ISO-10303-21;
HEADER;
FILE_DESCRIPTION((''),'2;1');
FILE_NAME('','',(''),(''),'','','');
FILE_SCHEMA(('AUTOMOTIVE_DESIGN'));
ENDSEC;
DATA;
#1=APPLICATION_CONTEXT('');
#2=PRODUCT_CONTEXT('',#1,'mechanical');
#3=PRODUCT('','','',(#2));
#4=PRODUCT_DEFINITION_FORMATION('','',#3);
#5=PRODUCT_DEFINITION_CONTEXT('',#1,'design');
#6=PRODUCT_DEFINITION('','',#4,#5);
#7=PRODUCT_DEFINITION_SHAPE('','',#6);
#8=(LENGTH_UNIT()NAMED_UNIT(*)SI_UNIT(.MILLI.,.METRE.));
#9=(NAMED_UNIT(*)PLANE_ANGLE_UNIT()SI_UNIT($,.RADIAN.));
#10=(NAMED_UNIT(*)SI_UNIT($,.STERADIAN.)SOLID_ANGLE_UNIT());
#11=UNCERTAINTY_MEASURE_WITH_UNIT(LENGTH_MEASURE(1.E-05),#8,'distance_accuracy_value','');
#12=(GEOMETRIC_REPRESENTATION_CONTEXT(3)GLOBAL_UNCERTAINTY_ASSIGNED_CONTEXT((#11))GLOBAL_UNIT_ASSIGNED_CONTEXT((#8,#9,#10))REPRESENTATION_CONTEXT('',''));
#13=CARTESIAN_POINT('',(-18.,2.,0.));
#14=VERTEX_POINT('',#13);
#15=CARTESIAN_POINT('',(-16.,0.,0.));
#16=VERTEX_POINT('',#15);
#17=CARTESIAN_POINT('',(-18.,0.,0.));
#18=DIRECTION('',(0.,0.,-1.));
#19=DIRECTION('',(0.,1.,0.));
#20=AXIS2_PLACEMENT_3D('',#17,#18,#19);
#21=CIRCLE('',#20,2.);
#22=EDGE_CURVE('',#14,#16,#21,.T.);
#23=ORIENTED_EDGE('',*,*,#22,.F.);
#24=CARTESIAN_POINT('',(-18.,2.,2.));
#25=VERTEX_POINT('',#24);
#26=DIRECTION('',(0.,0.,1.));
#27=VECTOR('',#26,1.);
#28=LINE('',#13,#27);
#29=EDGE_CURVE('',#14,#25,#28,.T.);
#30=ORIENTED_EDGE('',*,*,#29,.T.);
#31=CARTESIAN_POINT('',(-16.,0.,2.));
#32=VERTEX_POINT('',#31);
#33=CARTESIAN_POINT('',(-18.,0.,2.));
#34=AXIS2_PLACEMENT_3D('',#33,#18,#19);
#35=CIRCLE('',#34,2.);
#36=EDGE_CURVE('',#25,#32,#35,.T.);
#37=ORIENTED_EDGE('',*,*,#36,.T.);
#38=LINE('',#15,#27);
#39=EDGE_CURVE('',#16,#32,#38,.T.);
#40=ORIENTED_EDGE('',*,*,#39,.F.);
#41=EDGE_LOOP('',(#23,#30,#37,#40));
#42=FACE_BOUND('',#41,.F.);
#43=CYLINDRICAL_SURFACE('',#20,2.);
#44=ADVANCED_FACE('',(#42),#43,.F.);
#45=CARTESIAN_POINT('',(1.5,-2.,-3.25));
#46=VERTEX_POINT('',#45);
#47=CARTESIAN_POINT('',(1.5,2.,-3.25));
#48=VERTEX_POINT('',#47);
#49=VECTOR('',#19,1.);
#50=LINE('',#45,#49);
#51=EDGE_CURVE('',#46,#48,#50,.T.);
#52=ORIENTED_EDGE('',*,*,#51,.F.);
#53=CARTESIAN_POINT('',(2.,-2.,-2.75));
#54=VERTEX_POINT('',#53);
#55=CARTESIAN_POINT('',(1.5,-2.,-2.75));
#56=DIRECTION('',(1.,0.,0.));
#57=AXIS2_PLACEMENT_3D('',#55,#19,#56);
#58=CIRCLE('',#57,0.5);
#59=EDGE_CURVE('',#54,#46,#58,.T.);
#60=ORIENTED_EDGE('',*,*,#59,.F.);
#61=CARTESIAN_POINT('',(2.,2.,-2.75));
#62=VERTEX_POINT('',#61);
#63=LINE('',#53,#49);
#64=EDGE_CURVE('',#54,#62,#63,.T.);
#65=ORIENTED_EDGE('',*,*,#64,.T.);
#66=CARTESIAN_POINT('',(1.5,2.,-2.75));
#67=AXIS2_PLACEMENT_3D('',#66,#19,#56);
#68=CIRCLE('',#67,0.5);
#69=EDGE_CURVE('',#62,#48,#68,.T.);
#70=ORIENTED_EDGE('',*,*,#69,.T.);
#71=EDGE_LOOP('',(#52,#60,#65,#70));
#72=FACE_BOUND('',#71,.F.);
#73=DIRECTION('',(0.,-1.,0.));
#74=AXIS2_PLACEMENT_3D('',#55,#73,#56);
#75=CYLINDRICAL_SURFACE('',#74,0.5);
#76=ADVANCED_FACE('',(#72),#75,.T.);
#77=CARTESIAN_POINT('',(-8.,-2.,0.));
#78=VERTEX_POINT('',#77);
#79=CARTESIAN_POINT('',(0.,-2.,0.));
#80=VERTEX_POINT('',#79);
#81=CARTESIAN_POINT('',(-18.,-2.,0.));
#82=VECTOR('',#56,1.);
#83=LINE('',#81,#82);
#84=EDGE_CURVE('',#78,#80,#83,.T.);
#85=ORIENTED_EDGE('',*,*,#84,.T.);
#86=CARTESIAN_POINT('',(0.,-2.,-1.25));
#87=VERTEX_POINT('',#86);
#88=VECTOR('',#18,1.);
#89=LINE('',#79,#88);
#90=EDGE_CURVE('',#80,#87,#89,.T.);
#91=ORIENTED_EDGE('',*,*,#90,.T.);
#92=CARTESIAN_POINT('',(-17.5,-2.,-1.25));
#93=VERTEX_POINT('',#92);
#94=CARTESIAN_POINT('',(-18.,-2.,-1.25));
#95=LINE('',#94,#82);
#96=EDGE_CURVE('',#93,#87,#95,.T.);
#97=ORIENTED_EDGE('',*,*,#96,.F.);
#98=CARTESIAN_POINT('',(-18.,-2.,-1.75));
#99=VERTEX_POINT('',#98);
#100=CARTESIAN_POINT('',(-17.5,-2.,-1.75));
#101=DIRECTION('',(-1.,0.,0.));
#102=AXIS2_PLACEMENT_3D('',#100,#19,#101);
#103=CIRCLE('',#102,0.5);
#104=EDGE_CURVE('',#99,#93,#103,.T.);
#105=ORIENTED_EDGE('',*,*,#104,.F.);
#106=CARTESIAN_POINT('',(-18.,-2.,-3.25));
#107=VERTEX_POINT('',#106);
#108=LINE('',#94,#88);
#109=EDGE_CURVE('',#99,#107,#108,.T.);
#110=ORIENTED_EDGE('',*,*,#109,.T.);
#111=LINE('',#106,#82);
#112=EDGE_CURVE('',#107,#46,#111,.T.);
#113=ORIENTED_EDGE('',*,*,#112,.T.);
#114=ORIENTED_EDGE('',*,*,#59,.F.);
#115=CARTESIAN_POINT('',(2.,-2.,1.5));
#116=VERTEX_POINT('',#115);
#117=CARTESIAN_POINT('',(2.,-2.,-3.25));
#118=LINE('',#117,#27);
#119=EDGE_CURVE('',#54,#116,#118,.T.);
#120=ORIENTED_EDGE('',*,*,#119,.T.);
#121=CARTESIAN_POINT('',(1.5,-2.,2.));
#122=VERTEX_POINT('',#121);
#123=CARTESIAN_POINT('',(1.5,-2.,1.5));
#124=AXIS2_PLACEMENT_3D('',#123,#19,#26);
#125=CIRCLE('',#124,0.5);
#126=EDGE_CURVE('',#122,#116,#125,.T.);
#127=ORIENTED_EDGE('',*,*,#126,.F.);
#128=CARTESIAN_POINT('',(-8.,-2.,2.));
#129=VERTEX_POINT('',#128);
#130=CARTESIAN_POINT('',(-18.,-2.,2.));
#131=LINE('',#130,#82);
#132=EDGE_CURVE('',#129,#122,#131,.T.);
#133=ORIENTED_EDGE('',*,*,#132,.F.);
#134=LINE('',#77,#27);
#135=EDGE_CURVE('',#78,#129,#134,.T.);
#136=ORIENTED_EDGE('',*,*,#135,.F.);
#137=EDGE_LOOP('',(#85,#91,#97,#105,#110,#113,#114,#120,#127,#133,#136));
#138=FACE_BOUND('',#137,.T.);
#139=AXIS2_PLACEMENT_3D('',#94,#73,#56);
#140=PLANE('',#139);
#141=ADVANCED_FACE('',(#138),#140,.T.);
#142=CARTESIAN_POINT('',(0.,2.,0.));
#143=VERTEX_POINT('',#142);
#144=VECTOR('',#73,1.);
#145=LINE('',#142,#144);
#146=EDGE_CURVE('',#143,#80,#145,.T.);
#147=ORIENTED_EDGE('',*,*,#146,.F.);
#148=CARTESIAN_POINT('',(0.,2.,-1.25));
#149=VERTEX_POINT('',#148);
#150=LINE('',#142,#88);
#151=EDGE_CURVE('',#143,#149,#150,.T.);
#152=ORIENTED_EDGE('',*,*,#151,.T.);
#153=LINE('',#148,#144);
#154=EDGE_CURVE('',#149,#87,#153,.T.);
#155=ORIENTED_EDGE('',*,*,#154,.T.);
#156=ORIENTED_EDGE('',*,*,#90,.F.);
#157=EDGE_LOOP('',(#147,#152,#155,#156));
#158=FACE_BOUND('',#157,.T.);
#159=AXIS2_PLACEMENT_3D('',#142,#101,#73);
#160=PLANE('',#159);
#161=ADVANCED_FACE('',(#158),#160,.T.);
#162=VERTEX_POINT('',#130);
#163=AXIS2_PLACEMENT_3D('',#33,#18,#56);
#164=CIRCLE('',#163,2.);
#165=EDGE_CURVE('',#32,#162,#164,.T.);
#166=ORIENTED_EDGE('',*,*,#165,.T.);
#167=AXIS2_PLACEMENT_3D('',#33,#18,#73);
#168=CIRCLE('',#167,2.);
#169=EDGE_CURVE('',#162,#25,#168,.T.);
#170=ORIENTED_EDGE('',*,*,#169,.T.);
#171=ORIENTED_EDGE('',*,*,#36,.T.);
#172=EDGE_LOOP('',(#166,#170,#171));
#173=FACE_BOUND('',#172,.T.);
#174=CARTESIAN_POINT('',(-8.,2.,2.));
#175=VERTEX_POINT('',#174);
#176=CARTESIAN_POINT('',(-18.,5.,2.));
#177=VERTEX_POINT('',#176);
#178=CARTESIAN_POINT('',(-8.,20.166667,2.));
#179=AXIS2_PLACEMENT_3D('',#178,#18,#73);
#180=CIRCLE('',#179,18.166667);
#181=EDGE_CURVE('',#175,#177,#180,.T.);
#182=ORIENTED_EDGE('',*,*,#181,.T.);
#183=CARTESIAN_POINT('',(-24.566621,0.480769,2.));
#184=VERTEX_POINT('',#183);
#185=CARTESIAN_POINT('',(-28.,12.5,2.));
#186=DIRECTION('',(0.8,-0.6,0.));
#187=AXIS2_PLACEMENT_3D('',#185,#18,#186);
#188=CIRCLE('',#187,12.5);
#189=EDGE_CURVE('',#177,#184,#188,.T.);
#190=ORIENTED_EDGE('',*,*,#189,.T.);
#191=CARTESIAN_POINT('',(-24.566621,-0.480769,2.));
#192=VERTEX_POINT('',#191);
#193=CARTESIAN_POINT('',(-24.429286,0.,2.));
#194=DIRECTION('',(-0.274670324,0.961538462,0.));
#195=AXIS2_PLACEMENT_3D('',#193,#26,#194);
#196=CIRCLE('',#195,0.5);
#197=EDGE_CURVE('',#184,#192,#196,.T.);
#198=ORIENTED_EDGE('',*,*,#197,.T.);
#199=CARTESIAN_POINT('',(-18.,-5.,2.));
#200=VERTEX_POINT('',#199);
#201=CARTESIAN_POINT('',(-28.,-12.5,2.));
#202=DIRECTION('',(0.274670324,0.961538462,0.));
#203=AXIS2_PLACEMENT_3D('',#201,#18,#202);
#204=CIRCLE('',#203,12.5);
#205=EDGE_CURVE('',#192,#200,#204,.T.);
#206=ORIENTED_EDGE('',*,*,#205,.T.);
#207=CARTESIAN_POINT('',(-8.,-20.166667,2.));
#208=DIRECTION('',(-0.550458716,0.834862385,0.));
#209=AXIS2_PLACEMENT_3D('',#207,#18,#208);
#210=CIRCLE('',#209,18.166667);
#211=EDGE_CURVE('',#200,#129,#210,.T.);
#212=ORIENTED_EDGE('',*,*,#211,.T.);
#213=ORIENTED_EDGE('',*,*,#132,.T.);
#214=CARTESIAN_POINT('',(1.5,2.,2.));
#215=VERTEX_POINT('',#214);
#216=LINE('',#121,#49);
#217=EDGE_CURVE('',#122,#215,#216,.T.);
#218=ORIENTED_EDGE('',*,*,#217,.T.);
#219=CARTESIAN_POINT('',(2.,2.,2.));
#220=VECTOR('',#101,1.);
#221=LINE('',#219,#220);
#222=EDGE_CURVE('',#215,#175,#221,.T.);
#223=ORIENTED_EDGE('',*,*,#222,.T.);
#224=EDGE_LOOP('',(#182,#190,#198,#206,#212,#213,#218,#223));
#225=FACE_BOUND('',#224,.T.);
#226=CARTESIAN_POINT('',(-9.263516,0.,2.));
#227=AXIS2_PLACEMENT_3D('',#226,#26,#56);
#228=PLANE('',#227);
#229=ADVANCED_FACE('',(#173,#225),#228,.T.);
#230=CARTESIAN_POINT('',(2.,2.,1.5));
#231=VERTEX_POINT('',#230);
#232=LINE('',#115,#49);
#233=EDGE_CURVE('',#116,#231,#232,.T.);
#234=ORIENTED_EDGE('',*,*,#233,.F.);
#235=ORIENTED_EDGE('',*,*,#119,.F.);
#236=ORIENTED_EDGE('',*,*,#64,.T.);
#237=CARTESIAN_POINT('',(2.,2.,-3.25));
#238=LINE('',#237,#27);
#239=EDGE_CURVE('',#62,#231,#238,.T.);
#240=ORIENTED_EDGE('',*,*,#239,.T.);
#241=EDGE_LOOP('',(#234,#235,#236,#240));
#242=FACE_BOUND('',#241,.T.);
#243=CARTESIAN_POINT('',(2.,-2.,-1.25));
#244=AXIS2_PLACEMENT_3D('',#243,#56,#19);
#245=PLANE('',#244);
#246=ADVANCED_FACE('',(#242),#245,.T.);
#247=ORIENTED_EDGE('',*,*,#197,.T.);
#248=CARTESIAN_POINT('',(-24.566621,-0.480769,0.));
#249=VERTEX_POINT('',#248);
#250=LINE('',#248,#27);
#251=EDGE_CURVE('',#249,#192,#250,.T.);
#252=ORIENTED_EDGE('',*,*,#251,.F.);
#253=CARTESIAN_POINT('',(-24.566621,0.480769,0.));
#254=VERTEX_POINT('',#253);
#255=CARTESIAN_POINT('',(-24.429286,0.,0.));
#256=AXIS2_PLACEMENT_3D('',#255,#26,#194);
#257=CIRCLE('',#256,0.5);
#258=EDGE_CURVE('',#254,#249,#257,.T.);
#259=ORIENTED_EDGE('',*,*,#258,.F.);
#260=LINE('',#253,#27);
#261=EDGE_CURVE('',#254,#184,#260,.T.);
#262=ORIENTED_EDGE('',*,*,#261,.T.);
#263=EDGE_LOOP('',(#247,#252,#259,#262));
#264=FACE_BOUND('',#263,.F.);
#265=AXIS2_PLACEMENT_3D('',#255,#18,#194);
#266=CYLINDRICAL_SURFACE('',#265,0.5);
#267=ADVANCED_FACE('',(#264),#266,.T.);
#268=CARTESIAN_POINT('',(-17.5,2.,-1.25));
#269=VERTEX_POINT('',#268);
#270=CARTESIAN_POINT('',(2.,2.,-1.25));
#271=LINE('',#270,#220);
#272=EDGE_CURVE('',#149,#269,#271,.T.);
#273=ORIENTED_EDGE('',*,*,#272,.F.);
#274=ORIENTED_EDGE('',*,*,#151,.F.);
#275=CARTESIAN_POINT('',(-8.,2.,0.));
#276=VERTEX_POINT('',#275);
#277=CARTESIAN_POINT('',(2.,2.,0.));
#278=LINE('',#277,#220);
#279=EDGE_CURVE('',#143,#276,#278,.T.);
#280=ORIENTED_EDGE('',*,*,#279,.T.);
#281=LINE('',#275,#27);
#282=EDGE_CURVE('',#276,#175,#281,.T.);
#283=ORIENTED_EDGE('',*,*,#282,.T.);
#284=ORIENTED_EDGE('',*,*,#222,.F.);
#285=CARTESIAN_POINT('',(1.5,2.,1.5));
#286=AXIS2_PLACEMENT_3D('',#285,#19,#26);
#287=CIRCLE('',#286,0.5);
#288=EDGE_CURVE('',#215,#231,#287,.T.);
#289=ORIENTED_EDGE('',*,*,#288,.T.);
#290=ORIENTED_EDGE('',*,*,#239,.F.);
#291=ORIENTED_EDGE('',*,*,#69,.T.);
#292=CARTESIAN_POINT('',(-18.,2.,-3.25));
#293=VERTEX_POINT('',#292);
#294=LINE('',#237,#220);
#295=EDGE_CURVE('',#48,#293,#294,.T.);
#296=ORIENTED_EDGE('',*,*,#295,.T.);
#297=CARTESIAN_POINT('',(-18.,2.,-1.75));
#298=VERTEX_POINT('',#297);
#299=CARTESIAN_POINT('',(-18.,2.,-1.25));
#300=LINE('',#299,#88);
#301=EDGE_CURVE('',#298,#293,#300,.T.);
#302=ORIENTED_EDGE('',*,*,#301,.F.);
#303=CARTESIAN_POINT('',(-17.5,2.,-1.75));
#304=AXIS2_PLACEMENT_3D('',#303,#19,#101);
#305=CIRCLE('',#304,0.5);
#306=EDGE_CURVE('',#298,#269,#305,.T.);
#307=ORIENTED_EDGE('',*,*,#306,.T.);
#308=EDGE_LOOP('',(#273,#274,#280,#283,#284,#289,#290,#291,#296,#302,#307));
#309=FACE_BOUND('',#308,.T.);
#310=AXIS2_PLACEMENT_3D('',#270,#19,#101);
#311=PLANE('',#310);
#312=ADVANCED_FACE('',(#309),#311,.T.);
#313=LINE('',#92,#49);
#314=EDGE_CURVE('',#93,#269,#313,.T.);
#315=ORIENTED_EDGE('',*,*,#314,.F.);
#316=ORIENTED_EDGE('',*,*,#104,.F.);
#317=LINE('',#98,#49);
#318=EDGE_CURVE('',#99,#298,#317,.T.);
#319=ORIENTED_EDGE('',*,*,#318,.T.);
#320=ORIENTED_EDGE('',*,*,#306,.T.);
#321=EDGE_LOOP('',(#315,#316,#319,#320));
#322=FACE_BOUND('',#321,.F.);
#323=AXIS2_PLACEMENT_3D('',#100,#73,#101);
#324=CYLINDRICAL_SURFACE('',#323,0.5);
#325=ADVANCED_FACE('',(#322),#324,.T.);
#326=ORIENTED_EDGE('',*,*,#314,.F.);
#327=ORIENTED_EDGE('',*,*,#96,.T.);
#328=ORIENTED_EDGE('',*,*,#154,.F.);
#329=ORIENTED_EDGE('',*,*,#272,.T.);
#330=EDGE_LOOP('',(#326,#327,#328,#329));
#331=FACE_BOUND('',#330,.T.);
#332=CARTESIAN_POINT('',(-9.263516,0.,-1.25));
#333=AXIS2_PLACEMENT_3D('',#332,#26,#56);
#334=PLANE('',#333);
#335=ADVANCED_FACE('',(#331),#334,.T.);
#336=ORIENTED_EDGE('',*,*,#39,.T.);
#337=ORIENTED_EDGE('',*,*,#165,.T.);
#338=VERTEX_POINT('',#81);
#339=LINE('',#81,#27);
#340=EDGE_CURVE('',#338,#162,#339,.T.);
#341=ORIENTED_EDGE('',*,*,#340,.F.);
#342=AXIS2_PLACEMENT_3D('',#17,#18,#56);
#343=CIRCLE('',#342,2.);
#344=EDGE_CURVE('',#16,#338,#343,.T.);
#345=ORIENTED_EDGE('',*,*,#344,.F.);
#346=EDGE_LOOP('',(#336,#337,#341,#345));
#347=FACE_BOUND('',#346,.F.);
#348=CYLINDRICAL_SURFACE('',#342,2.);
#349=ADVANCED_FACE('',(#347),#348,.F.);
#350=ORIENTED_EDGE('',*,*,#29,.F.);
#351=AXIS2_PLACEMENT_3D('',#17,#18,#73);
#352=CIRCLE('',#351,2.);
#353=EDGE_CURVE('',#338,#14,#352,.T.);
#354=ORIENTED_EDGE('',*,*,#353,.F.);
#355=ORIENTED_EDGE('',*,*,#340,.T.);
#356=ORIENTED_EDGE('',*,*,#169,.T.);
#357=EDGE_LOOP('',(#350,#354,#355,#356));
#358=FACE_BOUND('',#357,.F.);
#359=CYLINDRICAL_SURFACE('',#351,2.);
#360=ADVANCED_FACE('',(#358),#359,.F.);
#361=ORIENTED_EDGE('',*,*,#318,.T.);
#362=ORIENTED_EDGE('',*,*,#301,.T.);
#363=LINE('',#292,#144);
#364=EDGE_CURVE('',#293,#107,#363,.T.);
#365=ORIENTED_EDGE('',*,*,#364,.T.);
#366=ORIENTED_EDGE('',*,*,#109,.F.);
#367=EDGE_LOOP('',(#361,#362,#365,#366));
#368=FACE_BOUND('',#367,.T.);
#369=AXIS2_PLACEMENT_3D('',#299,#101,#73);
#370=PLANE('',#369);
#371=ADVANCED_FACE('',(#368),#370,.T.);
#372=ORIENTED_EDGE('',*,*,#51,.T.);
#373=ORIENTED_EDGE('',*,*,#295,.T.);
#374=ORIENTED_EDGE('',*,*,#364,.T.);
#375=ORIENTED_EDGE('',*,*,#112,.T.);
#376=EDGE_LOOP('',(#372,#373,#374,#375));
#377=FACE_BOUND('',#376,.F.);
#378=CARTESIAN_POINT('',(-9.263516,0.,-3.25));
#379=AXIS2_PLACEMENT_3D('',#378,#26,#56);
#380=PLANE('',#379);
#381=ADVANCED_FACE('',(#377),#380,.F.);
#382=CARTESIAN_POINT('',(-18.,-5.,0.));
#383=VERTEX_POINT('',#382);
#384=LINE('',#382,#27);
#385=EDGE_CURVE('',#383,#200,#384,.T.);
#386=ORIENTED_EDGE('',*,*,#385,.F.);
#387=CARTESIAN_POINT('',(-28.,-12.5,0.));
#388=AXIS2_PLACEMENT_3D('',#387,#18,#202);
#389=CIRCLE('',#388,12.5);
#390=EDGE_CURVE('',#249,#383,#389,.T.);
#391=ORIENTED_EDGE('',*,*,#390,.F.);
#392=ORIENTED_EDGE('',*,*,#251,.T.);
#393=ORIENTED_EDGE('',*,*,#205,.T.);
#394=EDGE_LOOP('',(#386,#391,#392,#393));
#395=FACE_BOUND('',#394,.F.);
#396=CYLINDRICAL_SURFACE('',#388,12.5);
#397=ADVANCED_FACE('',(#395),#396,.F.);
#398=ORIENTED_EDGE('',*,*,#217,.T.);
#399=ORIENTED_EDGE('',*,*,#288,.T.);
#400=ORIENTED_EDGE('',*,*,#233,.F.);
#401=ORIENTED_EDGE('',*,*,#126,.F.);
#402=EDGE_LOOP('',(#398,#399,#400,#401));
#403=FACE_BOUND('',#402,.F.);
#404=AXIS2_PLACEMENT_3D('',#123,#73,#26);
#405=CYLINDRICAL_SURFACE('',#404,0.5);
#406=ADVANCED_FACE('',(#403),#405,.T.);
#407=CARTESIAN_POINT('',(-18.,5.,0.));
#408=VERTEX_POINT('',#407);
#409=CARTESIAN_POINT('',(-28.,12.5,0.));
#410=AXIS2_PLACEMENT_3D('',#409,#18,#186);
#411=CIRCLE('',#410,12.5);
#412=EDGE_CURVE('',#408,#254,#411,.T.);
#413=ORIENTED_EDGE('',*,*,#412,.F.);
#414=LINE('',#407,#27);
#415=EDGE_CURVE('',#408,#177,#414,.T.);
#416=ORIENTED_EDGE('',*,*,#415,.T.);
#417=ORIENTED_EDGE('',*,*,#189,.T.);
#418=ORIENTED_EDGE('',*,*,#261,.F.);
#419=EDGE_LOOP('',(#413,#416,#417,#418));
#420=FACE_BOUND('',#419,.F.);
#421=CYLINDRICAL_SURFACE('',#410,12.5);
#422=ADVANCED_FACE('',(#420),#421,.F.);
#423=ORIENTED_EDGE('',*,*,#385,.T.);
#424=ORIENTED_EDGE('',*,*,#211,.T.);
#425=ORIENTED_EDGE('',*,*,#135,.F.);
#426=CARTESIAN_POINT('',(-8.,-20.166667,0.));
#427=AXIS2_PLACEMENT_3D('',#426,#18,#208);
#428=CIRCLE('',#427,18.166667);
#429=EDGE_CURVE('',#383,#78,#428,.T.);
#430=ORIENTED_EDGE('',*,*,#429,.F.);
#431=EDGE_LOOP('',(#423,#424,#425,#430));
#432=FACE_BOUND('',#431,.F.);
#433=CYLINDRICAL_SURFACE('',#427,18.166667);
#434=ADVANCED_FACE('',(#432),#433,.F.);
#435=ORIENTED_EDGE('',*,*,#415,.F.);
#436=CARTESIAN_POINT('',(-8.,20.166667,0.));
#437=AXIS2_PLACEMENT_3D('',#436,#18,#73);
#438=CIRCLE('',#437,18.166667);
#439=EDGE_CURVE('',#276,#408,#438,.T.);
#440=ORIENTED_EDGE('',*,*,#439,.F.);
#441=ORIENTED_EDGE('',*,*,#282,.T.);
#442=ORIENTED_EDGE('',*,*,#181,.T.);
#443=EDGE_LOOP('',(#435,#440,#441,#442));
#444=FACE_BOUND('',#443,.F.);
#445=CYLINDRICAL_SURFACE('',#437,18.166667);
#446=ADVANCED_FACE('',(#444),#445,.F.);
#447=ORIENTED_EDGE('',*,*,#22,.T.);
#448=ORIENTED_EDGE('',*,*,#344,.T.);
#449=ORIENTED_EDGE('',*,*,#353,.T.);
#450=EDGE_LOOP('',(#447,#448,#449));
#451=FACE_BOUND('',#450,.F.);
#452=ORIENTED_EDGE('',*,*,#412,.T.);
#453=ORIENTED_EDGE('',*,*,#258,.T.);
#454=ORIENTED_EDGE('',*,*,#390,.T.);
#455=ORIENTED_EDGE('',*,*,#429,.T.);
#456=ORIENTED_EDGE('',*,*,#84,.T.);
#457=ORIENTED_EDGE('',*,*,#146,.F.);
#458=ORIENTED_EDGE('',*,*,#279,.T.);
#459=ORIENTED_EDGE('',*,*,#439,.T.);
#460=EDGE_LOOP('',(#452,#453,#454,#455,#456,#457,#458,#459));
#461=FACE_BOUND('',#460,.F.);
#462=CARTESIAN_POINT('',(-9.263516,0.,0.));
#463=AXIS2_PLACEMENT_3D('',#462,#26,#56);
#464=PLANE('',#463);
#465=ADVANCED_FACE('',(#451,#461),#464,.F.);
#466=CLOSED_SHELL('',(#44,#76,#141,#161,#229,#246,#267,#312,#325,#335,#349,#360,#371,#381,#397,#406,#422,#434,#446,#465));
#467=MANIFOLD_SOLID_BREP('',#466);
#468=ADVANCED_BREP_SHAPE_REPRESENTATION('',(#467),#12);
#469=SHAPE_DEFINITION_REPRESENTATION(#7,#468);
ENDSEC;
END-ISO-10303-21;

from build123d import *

# Parameters (mm, degrees)
F4_DEPTH = 2
F5_DEPTH = 1.25
F6_START = -1.25
F6_DEPTH = 2
F8_DEPTH = 4


# Not quite as in the source:
# - a feature names something its author has since deleted; it is built from what else it names


with BuildPart() as f4:
    # F3 (on Top) → F4 (new body)
    with BuildSketch(Plane.XY):
        with BuildLine():
            Line((0, -2), (0, 0))
            Line((0, 0), (0, 2))
            Line((0, 2), (-8, 2))
            Line((-8, 2), (-18, 2))
            ThreePointArc((-18, 2), (-16.5857864376, 1.4142135624), (-16, 0))
            ThreePointArc((-16, 0), (-16.5857864376, -1.4142135624), (-18, -2))
            Line((-18, -2), (-8, -2))
            Line((-8, -2), (0, -2))
        make_face()
        Polygon((0, 2), (0, 0), (0, -2), (2, -2), (2, 2), align=None)
        with BuildLine():
            Line((-18, 2), (-8, 2))
            ThreePointArc((-8, 2), (-13.2201532545, 2.7661558185), (-18, 5))
            ThreePointArc((-18, 5), (-20.9134084444, 2.2029023447), (-24.5666209478, 0.4807692308))
            ThreePointArc((-24.5666209478, 0.4807692308), (-24.9292857857, 0), (-24.5666209478, -0.4807692308))
            ThreePointArc((-24.5666209478, -0.4807692308), (-20.9134084444, -2.2029023447), (-18, -5))
            ThreePointArc((-18, -5), (-13.2201532545, -2.7661558185), (-8, -2))
            Line((-8, -2), (-18, -2))
            ThreePointArc((-18, -2), (-20, 0), (-18, 2))
        make_face()
    extrude(amount=F4_DEPTH)

    # F3 (on Top) → F5 (join)
    with BuildSketch(Plane.XY):
        Polygon((0, 2), (0, 0), (0, -2), (2, -2), (2, 2), align=None)
    extrude(amount=-F5_DEPTH)

    # F3 (on Top) → F6 (join)
    with BuildSketch(Plane.XY.offset(F6_START)):
        with BuildLine():
            Line((0, -2), (0, 0))
            Line((0, 0), (0, 2))
            Line((0, 2), (-8, 2))
            Line((-8, 2), (-18, 2))
            ThreePointArc((-18, 2), (-16.5857864376, 1.4142135624), (-16, 0))
            ThreePointArc((-16, 0), (-16.5857864376, -1.4142135624), (-18, -2))
            Line((-18, -2), (-8, -2))
            Line((-8, -2), (0, -2))
        make_face()
        Polygon((0, 2), (0, 0), (0, -2), (2, -2), (2, 2), align=None)
        with BuildLine():
            ThreePointArc((-16, 0), (-16.5857864376, 1.4142135624), (-18, 2))
            Line((-18, 2), (-18, -2))
            ThreePointArc((-18, -2), (-16.5857864376, -1.4142135624), (-16, 0))
        make_face()
    extrude(amount=-F6_DEPTH)

    # F7 (on face) → F8 (cut)
    with BuildSketch(Plane.XZ.offset(2)):
        with BuildLine():
            Line((-18, -1.25), (-18, -1.75))
            ThreePointArc((-18, -1.75), (-17.8535533906, -1.3964466094), (-17.5, -1.25))
            Line((-17.5, -1.25), (-18, -1.25))
        make_face()
        with BuildLine():
            ThreePointArc((1.5, 2), (1.8535533906, 1.8535533906), (2, 1.5))
            Line((2, 1.5), (2, 2))
            Line((2, 2), (1.5, 2))
        make_face()
        with BuildLine():
            ThreePointArc((2, -2.75), (1.8535533906, -3.1035533906), (1.5, -3.25))
            Line((1.5, -3.25), (2, -3.25))
            Line((2, -3.25), (2, -2.75))
        make_face()
    extrude(amount=-F8_DEPTH, mode=Mode.SUBTRACT)


solid = f4.part
